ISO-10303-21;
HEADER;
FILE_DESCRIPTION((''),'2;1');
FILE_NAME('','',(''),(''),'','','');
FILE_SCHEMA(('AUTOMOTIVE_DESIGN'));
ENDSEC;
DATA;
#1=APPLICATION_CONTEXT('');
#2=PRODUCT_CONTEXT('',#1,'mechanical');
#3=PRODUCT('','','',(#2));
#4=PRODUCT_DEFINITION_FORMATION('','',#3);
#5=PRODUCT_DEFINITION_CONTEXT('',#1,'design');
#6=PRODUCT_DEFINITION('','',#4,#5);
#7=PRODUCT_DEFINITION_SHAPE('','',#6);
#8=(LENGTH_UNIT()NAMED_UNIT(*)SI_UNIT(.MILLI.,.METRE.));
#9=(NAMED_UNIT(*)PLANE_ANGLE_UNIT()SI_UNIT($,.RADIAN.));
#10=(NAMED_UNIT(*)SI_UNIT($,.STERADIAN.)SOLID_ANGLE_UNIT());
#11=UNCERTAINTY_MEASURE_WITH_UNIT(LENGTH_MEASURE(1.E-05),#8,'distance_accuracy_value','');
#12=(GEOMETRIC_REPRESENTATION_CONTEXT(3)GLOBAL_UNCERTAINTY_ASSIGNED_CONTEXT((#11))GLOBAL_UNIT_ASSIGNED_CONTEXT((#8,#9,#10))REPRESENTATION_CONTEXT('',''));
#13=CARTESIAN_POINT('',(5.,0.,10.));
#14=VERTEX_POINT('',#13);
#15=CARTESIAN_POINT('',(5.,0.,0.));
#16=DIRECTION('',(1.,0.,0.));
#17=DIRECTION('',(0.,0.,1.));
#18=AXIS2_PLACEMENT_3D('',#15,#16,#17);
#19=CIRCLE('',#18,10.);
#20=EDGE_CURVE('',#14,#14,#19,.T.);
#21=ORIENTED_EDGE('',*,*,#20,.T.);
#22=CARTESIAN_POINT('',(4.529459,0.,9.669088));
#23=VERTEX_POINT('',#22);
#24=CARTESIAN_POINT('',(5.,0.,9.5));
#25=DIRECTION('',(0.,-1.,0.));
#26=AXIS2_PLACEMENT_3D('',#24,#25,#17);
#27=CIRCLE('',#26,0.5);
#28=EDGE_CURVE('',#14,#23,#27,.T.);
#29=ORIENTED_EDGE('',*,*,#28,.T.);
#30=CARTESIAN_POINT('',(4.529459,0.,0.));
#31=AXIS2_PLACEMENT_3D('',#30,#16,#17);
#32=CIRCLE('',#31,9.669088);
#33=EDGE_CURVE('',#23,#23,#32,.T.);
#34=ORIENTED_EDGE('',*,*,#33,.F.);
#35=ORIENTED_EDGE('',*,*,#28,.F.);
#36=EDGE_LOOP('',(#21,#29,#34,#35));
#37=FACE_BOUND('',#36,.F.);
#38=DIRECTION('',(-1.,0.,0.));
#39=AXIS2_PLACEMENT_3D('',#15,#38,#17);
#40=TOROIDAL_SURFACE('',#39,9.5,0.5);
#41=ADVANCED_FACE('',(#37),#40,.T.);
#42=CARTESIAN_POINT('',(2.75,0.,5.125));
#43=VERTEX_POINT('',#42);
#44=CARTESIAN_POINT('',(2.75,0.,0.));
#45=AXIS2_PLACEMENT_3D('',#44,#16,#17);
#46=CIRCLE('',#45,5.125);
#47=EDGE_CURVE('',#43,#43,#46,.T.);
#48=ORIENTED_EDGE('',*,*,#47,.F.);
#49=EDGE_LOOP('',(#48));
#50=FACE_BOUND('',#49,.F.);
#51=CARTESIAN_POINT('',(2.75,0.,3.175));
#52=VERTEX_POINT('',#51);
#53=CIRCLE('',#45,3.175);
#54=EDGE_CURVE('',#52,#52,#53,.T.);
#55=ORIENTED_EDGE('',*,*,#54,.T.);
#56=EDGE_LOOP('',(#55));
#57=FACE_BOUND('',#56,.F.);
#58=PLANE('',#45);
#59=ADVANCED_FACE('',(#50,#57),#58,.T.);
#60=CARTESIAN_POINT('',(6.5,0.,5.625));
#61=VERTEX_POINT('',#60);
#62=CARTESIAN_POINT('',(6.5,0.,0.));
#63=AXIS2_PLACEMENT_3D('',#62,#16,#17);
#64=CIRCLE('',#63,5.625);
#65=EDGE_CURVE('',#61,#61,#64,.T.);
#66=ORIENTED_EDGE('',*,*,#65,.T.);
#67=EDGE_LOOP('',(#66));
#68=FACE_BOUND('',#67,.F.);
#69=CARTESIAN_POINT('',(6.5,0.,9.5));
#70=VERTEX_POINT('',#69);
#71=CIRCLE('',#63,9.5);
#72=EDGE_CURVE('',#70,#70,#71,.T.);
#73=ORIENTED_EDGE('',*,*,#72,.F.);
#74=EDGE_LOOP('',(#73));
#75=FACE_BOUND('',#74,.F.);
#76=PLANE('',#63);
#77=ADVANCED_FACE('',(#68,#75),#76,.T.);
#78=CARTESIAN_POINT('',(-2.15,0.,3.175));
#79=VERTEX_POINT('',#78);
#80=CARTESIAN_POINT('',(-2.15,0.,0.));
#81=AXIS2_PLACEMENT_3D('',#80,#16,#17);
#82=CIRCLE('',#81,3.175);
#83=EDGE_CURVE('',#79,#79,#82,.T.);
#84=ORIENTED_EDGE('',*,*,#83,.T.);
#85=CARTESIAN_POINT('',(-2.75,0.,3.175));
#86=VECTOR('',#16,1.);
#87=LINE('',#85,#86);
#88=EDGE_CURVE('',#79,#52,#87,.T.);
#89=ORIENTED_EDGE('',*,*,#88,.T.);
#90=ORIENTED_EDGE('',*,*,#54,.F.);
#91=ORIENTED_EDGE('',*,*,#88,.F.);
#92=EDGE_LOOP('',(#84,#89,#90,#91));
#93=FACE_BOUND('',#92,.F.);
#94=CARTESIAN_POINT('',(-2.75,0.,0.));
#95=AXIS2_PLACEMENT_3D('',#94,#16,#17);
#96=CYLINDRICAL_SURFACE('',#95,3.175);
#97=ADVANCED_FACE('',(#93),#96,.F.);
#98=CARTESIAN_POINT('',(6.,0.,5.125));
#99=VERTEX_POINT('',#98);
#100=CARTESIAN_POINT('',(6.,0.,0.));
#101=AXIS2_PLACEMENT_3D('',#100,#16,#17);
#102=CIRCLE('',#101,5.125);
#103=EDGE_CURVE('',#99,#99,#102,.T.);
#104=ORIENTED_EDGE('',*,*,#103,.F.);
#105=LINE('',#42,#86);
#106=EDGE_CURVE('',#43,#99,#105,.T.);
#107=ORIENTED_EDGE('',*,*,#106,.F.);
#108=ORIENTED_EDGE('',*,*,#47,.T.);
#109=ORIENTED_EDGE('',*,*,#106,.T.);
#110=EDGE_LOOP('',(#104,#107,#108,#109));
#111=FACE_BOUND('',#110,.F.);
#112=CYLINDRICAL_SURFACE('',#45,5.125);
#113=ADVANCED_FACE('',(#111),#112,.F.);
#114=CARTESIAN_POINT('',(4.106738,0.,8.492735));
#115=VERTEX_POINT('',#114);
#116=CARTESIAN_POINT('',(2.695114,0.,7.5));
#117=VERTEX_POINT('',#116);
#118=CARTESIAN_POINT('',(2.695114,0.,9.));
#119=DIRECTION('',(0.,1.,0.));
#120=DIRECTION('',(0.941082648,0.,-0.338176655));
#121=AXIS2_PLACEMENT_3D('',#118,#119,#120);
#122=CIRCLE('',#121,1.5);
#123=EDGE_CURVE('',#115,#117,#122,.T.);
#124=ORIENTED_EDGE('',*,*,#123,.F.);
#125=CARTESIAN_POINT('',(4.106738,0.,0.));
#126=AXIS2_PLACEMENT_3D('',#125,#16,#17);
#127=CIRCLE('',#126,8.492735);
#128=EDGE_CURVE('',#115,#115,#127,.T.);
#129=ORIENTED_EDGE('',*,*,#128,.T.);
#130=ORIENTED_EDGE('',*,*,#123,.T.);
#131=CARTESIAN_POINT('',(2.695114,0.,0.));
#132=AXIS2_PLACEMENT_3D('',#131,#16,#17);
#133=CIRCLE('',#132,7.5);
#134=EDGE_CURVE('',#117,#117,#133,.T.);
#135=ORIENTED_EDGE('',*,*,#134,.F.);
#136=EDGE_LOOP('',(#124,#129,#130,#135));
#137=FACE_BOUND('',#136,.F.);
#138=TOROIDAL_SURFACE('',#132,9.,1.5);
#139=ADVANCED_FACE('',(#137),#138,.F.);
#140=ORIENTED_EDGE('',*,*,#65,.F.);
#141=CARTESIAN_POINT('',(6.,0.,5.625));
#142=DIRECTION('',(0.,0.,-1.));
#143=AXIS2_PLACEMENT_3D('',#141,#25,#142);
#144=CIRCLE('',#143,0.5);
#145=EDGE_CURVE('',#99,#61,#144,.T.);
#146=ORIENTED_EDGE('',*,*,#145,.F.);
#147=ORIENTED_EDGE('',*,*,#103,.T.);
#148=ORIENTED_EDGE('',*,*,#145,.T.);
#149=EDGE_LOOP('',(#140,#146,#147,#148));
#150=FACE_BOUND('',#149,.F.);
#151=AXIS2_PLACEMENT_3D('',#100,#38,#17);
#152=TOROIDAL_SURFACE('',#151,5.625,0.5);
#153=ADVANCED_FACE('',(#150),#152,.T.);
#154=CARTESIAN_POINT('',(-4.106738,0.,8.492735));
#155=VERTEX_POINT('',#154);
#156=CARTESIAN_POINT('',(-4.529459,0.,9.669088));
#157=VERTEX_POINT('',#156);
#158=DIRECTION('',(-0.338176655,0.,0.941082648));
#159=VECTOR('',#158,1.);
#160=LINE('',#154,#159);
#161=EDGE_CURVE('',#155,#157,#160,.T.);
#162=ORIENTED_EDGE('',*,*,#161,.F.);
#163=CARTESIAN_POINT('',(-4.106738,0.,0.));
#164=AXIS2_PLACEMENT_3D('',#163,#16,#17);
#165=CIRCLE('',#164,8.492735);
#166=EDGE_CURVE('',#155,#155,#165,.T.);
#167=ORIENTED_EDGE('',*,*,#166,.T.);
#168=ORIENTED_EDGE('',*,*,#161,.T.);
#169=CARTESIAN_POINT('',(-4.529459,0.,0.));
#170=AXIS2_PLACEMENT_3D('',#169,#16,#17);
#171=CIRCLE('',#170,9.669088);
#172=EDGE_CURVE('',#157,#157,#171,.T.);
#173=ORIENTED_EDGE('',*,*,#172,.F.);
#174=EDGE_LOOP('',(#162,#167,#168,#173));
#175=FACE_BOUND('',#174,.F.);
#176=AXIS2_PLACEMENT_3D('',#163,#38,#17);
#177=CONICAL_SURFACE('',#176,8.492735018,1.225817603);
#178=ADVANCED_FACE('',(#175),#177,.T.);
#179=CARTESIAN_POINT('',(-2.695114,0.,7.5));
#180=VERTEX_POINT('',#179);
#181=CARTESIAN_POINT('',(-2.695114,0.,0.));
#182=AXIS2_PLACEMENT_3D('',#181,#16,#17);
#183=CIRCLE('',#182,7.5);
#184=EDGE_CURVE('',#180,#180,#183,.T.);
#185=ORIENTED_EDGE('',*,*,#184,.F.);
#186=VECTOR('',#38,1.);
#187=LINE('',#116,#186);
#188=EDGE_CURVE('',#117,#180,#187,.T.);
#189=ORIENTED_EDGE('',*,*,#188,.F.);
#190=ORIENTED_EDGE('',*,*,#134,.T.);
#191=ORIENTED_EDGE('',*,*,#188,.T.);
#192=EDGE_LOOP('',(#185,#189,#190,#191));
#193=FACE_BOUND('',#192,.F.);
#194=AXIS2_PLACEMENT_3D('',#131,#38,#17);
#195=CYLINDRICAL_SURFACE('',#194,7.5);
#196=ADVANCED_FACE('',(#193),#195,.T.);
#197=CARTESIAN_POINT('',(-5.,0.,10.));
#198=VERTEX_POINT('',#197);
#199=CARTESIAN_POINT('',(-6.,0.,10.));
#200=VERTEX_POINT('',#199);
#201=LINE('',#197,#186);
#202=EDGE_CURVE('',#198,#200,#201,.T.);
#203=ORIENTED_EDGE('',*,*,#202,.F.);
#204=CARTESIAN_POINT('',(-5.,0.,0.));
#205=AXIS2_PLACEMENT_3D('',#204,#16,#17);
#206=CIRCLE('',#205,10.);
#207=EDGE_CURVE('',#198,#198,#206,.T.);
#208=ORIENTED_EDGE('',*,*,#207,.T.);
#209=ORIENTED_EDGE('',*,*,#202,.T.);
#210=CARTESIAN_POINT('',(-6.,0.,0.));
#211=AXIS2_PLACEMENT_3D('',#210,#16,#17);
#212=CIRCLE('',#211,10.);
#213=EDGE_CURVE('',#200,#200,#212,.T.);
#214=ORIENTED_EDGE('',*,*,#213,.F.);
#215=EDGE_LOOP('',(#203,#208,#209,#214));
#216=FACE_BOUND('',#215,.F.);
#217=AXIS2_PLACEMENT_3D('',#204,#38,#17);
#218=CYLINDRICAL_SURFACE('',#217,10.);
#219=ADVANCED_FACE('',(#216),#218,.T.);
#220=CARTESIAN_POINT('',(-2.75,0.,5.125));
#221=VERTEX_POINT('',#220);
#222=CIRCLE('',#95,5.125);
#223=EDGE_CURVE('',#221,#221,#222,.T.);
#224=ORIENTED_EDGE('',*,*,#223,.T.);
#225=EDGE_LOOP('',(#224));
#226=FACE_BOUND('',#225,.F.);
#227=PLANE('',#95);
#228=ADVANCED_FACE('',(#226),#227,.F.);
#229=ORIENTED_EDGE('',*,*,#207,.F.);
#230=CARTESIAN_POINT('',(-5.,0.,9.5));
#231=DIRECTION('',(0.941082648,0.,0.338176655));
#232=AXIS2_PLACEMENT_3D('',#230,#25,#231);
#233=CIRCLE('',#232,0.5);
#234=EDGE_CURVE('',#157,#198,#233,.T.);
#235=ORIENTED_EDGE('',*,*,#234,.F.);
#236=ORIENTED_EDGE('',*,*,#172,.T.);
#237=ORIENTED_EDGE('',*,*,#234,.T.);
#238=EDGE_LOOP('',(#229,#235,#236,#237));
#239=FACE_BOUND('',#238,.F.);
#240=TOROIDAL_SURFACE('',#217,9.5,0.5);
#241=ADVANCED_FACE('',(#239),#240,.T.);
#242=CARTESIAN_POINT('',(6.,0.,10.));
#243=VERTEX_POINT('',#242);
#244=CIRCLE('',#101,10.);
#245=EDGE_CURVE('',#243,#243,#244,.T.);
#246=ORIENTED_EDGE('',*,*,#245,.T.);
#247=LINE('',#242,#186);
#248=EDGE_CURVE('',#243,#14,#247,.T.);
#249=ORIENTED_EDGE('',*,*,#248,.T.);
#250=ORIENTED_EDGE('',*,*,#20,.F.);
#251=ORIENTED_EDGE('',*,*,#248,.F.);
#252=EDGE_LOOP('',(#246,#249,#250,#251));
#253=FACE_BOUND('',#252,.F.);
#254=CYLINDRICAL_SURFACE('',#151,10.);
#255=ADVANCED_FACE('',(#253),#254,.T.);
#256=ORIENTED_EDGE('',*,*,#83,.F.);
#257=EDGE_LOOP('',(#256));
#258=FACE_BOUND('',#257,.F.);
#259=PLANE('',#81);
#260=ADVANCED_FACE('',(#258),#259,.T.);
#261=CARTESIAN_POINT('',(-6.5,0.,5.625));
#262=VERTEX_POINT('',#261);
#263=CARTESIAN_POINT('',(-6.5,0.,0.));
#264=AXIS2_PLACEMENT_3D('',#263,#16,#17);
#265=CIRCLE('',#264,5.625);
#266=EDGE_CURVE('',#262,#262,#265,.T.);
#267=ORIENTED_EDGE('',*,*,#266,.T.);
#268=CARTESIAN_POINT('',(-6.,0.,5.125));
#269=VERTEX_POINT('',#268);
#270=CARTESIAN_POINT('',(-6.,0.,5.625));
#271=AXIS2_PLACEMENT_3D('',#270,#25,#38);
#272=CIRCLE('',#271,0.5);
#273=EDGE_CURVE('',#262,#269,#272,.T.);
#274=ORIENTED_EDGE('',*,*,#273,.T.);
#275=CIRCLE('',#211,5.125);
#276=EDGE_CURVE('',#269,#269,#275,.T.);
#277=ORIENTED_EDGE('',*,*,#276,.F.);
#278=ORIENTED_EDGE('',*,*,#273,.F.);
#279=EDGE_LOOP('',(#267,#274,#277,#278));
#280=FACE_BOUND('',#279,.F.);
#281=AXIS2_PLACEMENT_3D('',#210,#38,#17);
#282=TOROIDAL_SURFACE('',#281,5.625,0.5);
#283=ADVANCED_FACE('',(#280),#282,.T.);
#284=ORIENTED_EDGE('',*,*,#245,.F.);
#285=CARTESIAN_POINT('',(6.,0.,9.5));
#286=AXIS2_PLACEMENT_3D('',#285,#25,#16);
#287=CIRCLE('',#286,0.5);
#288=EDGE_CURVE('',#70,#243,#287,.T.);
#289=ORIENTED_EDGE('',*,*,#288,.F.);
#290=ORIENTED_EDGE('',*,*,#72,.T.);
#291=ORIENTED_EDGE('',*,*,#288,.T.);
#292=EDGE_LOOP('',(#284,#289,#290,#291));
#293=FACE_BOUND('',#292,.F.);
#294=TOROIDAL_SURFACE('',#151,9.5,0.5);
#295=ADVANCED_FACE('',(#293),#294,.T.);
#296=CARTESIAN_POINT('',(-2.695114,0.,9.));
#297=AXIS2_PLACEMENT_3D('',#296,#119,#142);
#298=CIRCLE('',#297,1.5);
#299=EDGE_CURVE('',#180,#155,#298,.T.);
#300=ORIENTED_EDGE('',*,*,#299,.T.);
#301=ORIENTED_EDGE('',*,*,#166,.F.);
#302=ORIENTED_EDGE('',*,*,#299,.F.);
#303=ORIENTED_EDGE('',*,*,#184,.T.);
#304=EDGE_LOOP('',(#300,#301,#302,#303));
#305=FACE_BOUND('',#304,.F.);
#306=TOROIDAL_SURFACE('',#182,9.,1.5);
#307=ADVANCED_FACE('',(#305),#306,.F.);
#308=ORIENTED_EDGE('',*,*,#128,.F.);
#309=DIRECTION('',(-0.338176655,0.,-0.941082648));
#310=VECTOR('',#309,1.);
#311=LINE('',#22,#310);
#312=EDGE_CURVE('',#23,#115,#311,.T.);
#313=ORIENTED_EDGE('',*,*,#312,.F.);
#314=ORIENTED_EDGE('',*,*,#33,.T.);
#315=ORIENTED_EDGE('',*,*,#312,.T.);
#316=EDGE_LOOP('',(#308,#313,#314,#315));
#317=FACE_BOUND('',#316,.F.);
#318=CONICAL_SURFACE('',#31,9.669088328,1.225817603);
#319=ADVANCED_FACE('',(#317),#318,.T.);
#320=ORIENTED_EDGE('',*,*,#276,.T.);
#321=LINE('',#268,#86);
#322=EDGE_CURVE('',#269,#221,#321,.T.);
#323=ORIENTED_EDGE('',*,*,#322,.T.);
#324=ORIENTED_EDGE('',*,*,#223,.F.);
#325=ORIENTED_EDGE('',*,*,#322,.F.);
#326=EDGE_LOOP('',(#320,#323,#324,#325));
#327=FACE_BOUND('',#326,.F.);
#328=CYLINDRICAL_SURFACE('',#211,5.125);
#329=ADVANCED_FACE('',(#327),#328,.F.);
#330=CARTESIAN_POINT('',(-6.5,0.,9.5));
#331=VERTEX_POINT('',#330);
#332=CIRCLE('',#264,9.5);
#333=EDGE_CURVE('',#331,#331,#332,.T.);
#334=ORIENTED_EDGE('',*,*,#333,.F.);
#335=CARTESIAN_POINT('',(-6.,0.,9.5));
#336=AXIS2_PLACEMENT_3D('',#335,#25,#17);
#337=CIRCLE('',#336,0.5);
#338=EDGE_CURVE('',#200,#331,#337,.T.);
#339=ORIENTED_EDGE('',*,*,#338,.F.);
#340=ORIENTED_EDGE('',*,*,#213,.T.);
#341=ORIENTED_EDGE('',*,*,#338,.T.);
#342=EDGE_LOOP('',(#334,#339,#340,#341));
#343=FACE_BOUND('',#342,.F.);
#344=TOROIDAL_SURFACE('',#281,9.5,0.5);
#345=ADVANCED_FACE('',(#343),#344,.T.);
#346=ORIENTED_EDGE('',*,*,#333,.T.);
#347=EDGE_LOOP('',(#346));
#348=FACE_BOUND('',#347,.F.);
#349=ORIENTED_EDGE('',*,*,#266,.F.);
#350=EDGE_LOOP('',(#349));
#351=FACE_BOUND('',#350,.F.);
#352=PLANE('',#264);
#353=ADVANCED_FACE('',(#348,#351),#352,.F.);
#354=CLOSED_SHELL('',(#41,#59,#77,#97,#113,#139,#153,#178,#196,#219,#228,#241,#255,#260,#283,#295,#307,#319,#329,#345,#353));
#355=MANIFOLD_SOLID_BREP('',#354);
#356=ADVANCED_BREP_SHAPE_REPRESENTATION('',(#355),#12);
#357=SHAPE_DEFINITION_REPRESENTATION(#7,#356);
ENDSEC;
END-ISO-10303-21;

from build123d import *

# Parameters (mm, degrees)
F0_W = 0.6
F0_H = 3.175


# Not quite as in the source:
# - a feature names something its author has since deleted; it is built from what else it names


with BuildPart() as f1:
    # F0 (on Front) → F1 (revolve)
    with BuildSketch(Plane.XZ):
        with BuildLine():
            Line((-5, 10), (-6, 10))
            ThreePointArc((-6, 10), (-6.3535533906, 9.8535533906), (-6.5, 9.5))
            Line((-6.5, 9.5), (-6.5, 5.625))
            ThreePointArc((-6.5, 5.625), (-6.3535533906, 5.2714466094), (-6, 5.125))
            Line((-6, 5.125), (-2.75, 5.125))
            Line((-2.75, 5.125), (-2.75, 3.175))
            Line((-2.75, 3.175), (-2.15, 3.175))
            Line((-2.15, 3.175), (0, 3.175))
            Line((0, 3.175), (2.75, 3.175))
            Line((2.75, 3.175), (2.75, 5.125))
            Line((2.75, 5.125), (6, 5.125))
            ThreePointArc((6, 5.125), (6.3535533906, 5.2714466094), (6.5, 5.625))
            Line((6.5, 5.625), (6.5, 9.5))
            ThreePointArc((6.5, 9.5), (6.3535533906, 9.8535533906), (6, 10))
            Line((6, 10), (5, 10))
            ThreePointArc((5, 10), (4.7123753868, 9.9089890975), (4.5294586761, 9.6690883275))
            Line((4.5294586761, 9.6690883275), (4.1067378574, 8.4927350176))
            ThreePointArc((4.1067378574, 8.4927350176), (3.5579877254, 7.7730327075), (2.6951138857, 7.5))
            Line((2.6951138857, 7.5), (0, 7.5))
            Line((0, 7.5), (-2.6951138857, 7.5))
            ThreePointArc((-2.6951138857, 7.5), (-3.5579877254, 7.7730327075), (-4.1067378574, 8.4927350176))
            Line((-4.1067378574, 8.4927350176), (-4.5294586761, 9.6690883275))
            ThreePointArc((-4.5294586761, 9.6690883275), (-4.7123753868, 9.9089890975), (-5, 10))
        make_face()
        with Locations((-2.45, 1.5875)):
            Rectangle(F0_W, F0_H)
    revolve(axis=Axis((0.9040212664, 0, 0), (1, 0, 0)))


solid = f1.part
